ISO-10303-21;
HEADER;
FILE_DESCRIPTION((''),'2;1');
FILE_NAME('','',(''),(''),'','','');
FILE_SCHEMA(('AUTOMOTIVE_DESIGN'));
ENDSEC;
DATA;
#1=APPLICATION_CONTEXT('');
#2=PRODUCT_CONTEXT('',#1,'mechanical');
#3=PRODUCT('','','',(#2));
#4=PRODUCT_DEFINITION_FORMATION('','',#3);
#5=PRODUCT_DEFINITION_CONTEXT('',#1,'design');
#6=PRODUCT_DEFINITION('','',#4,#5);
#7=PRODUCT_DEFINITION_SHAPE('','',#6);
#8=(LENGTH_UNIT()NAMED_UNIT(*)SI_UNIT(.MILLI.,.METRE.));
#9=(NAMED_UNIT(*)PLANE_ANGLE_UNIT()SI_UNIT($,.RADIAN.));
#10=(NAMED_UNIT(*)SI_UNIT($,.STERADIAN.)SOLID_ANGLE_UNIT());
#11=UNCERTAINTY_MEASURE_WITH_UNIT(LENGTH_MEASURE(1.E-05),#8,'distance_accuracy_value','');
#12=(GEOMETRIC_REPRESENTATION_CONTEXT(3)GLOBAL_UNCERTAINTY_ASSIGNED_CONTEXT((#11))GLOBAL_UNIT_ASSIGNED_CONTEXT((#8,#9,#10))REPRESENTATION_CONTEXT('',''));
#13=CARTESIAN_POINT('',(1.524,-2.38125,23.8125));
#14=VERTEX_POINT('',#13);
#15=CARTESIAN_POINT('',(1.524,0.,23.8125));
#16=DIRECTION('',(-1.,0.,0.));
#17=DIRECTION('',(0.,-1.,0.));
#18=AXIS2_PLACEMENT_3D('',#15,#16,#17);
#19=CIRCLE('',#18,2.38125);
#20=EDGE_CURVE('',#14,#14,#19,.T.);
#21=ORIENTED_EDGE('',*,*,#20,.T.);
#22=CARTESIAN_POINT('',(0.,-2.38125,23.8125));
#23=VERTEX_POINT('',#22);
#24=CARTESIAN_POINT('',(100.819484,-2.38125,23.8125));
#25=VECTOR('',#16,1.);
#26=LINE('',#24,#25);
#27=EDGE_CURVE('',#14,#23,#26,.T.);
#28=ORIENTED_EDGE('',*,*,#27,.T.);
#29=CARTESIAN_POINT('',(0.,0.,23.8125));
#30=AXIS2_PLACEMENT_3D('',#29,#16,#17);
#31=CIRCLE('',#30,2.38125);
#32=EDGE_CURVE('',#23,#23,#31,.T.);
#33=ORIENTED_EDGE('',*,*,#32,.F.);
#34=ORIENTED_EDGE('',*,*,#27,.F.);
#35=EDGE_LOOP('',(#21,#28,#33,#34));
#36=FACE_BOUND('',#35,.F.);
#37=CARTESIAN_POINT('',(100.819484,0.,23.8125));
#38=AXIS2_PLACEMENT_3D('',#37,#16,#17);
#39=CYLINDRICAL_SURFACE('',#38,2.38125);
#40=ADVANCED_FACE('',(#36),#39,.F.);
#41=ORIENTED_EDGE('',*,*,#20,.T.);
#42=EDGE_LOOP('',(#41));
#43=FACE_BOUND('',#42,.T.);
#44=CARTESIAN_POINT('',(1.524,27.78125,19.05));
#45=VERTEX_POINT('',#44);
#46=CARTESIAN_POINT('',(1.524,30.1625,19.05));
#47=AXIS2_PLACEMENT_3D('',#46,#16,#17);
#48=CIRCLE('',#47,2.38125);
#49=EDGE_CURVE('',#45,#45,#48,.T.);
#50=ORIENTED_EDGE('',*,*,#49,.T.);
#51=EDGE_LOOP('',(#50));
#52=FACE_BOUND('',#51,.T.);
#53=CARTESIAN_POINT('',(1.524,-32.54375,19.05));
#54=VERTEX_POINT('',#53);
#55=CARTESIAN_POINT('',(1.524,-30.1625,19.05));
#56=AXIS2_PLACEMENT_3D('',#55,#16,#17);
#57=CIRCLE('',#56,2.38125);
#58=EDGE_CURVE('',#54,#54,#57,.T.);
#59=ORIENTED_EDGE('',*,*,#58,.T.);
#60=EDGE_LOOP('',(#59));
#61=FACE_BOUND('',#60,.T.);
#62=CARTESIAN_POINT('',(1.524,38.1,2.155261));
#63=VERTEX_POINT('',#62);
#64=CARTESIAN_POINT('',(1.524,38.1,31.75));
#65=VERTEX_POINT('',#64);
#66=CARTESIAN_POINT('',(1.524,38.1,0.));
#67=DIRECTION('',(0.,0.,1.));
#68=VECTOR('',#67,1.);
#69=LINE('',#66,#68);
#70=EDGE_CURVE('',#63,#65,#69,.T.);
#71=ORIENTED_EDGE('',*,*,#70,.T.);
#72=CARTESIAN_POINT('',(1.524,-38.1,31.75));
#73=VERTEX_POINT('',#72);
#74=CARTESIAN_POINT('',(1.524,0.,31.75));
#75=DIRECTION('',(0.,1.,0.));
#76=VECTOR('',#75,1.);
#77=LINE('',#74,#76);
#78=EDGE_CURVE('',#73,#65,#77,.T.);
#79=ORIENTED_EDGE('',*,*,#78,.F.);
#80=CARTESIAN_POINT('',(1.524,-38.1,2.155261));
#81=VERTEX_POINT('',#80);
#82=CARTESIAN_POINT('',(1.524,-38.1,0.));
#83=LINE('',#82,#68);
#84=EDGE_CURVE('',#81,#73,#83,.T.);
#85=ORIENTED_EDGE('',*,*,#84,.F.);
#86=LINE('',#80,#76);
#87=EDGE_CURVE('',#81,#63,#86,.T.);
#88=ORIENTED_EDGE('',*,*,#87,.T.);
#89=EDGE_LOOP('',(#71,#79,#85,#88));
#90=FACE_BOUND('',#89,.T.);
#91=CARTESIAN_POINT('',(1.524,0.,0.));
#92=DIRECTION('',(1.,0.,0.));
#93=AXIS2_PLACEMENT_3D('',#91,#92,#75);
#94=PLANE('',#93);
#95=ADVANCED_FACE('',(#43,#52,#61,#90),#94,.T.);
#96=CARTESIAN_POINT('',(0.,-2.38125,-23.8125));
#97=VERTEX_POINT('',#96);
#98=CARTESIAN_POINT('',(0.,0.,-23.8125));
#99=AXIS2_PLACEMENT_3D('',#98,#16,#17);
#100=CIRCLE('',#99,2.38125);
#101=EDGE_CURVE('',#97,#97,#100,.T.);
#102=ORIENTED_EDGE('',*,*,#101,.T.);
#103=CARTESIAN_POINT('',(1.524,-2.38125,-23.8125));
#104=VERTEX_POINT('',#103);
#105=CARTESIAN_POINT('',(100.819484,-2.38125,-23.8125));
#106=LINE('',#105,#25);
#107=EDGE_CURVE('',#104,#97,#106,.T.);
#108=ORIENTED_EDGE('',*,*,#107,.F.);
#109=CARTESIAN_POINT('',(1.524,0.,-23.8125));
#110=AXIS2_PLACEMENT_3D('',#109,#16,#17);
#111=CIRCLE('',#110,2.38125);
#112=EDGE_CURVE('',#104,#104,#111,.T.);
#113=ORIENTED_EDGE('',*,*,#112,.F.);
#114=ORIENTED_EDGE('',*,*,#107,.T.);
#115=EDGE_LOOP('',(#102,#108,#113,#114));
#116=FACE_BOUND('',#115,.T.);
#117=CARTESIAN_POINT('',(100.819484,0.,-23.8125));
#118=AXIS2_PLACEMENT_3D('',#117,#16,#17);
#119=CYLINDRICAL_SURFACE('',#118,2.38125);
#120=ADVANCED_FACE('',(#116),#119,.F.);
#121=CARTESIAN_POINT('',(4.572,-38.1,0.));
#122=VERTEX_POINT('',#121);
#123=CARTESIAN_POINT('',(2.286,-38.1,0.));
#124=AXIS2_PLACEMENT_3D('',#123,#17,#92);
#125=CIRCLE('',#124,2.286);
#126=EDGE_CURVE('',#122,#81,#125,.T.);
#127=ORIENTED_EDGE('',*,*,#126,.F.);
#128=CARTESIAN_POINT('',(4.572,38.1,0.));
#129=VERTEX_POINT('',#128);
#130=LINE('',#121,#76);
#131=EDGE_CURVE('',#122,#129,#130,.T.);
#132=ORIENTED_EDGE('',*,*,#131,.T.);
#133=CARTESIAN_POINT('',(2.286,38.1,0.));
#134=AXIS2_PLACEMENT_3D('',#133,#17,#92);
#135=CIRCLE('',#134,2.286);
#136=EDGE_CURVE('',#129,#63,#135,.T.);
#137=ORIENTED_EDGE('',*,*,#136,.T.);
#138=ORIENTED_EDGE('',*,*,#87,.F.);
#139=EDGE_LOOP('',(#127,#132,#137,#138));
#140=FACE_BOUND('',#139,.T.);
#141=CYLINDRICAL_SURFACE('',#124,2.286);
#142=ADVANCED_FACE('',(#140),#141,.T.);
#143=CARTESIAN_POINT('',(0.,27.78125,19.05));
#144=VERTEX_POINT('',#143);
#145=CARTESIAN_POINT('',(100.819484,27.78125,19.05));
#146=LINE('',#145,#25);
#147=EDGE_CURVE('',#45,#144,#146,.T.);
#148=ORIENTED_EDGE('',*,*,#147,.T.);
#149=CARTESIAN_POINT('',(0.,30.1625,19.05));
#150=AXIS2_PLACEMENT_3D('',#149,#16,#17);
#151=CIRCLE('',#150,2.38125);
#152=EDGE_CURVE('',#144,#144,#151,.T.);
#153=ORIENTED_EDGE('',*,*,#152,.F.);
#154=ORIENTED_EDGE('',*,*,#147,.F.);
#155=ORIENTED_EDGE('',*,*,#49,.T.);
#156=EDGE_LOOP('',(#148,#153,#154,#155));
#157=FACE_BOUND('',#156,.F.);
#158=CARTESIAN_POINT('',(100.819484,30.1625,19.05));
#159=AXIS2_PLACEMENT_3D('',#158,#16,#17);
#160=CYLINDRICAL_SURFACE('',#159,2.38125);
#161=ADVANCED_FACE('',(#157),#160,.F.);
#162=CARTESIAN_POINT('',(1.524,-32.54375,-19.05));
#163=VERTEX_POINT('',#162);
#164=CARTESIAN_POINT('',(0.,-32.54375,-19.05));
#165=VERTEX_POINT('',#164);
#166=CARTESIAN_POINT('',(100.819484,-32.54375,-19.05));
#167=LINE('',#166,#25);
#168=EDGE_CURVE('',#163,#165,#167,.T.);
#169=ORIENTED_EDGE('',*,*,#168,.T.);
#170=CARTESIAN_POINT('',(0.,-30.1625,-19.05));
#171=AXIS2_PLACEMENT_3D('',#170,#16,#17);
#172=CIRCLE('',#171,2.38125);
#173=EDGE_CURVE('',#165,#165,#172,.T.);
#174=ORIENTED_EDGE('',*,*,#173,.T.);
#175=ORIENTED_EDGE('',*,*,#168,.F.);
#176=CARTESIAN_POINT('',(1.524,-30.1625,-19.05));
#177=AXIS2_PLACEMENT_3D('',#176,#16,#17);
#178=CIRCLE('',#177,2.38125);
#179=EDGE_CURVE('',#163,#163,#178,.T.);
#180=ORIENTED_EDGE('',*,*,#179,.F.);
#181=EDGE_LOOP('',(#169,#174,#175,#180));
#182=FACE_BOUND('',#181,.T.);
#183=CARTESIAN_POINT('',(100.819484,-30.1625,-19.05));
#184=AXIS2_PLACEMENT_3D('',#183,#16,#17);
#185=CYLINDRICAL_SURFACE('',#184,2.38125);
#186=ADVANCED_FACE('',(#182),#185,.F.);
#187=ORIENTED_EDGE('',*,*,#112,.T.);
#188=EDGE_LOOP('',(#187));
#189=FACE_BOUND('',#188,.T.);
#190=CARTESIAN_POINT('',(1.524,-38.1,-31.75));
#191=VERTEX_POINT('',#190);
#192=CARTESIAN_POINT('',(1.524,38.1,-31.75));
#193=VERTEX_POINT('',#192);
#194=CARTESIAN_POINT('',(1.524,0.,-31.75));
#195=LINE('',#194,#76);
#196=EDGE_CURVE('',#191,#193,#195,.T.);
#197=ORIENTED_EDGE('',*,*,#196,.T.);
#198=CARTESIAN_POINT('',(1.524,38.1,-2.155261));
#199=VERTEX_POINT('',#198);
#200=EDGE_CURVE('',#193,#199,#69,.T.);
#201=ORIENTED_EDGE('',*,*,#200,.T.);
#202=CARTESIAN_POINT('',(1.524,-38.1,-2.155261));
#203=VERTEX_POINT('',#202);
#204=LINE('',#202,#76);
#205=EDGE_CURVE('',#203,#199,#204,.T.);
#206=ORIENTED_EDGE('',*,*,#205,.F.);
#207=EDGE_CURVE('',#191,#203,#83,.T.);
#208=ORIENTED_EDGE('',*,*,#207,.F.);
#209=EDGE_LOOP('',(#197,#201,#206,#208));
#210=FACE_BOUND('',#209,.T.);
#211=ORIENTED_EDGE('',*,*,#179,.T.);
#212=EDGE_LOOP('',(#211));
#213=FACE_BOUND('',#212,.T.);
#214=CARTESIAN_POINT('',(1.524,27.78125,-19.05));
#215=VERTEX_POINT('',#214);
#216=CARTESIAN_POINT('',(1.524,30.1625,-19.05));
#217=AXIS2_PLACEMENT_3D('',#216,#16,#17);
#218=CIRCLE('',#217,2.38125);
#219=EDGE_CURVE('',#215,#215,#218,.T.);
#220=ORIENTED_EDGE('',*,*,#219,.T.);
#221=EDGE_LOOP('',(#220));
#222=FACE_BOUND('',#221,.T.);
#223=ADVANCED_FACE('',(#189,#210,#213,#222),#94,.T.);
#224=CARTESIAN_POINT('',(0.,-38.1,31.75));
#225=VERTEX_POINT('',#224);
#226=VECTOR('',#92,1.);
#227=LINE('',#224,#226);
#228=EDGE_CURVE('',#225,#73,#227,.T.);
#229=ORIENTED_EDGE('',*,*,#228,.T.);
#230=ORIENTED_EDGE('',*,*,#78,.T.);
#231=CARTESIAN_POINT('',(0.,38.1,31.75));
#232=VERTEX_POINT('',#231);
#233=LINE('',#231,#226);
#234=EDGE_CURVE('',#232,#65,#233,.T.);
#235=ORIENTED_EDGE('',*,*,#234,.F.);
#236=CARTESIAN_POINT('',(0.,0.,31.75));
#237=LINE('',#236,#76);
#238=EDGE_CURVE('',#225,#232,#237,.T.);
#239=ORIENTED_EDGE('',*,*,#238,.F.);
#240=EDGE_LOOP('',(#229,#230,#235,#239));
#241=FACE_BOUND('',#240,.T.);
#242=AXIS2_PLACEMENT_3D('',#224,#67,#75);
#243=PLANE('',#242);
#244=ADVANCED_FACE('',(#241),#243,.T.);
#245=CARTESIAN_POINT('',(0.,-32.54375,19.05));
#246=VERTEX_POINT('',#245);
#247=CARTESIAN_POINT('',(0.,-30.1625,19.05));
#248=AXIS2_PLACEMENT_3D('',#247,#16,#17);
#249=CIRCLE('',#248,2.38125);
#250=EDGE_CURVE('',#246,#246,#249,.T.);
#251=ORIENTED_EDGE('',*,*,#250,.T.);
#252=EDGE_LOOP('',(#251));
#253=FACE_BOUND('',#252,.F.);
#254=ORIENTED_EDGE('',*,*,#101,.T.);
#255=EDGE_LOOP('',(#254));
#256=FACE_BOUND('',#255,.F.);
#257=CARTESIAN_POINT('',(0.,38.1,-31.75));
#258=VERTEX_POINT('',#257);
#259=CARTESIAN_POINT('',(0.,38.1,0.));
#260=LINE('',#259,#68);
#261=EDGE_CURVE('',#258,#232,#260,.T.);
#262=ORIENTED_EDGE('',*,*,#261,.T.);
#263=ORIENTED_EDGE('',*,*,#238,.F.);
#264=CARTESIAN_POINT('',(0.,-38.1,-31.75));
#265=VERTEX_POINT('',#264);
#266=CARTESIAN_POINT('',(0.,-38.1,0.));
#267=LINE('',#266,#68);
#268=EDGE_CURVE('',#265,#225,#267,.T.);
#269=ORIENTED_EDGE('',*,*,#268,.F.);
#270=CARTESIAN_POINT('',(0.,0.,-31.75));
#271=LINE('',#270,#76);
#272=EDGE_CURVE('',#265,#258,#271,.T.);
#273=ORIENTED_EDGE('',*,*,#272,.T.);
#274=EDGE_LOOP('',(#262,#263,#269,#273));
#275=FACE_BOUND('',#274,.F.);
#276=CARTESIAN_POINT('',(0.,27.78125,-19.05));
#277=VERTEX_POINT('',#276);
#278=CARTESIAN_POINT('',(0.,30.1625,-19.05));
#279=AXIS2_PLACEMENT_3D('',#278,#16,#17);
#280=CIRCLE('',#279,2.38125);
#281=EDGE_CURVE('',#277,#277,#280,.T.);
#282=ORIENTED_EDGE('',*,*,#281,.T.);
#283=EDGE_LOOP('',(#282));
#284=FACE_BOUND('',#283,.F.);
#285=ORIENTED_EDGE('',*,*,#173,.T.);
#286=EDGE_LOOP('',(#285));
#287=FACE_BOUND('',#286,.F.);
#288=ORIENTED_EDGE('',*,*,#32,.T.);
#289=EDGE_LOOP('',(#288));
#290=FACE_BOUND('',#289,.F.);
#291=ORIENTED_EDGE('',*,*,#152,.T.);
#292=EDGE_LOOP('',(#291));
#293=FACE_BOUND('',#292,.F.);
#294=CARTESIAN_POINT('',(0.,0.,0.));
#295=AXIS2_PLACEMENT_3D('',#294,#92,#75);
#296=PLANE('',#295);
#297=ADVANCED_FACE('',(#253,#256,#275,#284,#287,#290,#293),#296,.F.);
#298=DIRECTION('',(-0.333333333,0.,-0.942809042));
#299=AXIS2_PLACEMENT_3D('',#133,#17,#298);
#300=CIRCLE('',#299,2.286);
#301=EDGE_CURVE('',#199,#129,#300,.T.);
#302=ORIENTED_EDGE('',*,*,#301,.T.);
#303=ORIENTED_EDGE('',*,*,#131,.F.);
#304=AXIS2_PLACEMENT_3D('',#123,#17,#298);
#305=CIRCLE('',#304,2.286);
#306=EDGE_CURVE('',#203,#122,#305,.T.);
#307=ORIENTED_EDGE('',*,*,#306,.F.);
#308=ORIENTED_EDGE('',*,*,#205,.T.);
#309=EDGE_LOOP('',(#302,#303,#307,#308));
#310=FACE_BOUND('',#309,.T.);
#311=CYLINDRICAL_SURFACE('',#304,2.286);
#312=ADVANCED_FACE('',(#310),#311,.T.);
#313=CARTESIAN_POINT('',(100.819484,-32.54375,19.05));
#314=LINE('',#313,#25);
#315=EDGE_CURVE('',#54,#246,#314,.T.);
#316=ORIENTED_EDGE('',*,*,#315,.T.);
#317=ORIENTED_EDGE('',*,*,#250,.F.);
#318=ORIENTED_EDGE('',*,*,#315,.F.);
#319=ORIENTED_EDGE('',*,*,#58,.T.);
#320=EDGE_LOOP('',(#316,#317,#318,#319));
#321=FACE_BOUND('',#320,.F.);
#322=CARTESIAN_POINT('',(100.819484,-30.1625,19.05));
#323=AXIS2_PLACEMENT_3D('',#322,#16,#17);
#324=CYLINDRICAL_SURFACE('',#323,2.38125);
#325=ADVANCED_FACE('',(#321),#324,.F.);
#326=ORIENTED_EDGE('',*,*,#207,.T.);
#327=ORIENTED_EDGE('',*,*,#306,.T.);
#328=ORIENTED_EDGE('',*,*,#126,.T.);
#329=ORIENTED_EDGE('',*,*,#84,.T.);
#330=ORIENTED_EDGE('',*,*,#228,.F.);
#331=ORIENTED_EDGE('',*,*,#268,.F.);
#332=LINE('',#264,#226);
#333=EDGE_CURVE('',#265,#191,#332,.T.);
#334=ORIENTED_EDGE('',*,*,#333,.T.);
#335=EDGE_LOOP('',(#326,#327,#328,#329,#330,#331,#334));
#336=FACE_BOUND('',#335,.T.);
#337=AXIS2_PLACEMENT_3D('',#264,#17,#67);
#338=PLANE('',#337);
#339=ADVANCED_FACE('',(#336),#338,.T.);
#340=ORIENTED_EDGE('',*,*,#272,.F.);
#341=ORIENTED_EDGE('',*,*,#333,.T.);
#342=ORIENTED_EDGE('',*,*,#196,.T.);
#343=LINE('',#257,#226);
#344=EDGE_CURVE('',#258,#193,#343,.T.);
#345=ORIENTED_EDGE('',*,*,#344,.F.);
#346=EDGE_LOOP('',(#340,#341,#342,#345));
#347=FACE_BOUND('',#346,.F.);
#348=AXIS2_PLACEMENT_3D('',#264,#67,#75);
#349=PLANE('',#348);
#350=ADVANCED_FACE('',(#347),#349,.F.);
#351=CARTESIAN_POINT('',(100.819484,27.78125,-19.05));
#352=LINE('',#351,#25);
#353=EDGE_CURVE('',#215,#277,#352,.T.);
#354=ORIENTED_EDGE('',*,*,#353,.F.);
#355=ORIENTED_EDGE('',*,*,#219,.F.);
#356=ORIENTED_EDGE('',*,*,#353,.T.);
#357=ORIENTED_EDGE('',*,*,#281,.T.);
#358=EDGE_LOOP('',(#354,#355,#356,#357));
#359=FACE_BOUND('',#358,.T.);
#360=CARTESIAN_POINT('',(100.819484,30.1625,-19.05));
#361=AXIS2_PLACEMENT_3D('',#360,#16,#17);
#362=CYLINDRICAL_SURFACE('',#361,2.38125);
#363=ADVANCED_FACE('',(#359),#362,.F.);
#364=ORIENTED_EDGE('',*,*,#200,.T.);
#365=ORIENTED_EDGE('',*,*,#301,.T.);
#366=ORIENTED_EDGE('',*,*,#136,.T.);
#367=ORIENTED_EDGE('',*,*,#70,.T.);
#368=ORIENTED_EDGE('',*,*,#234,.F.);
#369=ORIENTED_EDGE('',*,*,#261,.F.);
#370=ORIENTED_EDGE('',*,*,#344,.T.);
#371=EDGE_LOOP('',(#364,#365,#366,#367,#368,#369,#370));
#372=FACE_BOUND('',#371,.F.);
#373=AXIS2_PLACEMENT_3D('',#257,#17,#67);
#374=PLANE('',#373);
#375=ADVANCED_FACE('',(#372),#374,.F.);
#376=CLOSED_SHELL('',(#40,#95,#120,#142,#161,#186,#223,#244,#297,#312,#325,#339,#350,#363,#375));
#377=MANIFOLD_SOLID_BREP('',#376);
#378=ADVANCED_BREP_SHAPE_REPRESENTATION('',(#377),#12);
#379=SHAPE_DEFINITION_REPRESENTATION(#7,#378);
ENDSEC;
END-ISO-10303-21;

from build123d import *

# Parameters (mm, degrees)
F0_W     = 76.2
F0_H     = 63.5
F1_DEPTH = 1.524
F3_DEPTH = 76.2
F5_D     = 4.7625


# Not quite as in the source:
# - a pattern or mirror of a feature is missing from the dataset's text; its kind, count and spacing are read off the source's solid


with BuildPart() as f1:
    # F0 (on Right) → F1 (new body)
    with BuildSketch(Plane.YZ):
        Rectangle(F0_W, F0_H)
    extrude(amount=F1_DEPTH)

    # F2 (on face) → F3 (join, through all)
    with BuildSketch(Plane.XZ.offset(38.1)):
        with BuildLine():
            ThreePointArc((1.524, -2.1552614691), (3.6058227154, -1.866511184), (4.572, 0))
            ThreePointArc((4.572, 0), (3.6058227154, 1.866511184), (1.524, 2.1552614691))
            Line((1.524, 2.1552614691), (1.524, -2.1552614691))
        make_face()
    extrude(amount=-F3_DEPTH)

    # F5 (through all)
    with Locations(Plane.YZ.offset(1.524)):
        with Locations((-30.1625, 19.05), (0, 23.8125), (30.1625, 19.05)):
            f5 = Hole(F5_D / 2)

    # F5_copies: F5 across plane
    add(f5.mirror(Plane(origin=(0, 0, 0), x_dir=(-1, 0, 0), z_dir=(0, 0, -1))), mode=Mode.SUBTRACT)


solid = f1.part
